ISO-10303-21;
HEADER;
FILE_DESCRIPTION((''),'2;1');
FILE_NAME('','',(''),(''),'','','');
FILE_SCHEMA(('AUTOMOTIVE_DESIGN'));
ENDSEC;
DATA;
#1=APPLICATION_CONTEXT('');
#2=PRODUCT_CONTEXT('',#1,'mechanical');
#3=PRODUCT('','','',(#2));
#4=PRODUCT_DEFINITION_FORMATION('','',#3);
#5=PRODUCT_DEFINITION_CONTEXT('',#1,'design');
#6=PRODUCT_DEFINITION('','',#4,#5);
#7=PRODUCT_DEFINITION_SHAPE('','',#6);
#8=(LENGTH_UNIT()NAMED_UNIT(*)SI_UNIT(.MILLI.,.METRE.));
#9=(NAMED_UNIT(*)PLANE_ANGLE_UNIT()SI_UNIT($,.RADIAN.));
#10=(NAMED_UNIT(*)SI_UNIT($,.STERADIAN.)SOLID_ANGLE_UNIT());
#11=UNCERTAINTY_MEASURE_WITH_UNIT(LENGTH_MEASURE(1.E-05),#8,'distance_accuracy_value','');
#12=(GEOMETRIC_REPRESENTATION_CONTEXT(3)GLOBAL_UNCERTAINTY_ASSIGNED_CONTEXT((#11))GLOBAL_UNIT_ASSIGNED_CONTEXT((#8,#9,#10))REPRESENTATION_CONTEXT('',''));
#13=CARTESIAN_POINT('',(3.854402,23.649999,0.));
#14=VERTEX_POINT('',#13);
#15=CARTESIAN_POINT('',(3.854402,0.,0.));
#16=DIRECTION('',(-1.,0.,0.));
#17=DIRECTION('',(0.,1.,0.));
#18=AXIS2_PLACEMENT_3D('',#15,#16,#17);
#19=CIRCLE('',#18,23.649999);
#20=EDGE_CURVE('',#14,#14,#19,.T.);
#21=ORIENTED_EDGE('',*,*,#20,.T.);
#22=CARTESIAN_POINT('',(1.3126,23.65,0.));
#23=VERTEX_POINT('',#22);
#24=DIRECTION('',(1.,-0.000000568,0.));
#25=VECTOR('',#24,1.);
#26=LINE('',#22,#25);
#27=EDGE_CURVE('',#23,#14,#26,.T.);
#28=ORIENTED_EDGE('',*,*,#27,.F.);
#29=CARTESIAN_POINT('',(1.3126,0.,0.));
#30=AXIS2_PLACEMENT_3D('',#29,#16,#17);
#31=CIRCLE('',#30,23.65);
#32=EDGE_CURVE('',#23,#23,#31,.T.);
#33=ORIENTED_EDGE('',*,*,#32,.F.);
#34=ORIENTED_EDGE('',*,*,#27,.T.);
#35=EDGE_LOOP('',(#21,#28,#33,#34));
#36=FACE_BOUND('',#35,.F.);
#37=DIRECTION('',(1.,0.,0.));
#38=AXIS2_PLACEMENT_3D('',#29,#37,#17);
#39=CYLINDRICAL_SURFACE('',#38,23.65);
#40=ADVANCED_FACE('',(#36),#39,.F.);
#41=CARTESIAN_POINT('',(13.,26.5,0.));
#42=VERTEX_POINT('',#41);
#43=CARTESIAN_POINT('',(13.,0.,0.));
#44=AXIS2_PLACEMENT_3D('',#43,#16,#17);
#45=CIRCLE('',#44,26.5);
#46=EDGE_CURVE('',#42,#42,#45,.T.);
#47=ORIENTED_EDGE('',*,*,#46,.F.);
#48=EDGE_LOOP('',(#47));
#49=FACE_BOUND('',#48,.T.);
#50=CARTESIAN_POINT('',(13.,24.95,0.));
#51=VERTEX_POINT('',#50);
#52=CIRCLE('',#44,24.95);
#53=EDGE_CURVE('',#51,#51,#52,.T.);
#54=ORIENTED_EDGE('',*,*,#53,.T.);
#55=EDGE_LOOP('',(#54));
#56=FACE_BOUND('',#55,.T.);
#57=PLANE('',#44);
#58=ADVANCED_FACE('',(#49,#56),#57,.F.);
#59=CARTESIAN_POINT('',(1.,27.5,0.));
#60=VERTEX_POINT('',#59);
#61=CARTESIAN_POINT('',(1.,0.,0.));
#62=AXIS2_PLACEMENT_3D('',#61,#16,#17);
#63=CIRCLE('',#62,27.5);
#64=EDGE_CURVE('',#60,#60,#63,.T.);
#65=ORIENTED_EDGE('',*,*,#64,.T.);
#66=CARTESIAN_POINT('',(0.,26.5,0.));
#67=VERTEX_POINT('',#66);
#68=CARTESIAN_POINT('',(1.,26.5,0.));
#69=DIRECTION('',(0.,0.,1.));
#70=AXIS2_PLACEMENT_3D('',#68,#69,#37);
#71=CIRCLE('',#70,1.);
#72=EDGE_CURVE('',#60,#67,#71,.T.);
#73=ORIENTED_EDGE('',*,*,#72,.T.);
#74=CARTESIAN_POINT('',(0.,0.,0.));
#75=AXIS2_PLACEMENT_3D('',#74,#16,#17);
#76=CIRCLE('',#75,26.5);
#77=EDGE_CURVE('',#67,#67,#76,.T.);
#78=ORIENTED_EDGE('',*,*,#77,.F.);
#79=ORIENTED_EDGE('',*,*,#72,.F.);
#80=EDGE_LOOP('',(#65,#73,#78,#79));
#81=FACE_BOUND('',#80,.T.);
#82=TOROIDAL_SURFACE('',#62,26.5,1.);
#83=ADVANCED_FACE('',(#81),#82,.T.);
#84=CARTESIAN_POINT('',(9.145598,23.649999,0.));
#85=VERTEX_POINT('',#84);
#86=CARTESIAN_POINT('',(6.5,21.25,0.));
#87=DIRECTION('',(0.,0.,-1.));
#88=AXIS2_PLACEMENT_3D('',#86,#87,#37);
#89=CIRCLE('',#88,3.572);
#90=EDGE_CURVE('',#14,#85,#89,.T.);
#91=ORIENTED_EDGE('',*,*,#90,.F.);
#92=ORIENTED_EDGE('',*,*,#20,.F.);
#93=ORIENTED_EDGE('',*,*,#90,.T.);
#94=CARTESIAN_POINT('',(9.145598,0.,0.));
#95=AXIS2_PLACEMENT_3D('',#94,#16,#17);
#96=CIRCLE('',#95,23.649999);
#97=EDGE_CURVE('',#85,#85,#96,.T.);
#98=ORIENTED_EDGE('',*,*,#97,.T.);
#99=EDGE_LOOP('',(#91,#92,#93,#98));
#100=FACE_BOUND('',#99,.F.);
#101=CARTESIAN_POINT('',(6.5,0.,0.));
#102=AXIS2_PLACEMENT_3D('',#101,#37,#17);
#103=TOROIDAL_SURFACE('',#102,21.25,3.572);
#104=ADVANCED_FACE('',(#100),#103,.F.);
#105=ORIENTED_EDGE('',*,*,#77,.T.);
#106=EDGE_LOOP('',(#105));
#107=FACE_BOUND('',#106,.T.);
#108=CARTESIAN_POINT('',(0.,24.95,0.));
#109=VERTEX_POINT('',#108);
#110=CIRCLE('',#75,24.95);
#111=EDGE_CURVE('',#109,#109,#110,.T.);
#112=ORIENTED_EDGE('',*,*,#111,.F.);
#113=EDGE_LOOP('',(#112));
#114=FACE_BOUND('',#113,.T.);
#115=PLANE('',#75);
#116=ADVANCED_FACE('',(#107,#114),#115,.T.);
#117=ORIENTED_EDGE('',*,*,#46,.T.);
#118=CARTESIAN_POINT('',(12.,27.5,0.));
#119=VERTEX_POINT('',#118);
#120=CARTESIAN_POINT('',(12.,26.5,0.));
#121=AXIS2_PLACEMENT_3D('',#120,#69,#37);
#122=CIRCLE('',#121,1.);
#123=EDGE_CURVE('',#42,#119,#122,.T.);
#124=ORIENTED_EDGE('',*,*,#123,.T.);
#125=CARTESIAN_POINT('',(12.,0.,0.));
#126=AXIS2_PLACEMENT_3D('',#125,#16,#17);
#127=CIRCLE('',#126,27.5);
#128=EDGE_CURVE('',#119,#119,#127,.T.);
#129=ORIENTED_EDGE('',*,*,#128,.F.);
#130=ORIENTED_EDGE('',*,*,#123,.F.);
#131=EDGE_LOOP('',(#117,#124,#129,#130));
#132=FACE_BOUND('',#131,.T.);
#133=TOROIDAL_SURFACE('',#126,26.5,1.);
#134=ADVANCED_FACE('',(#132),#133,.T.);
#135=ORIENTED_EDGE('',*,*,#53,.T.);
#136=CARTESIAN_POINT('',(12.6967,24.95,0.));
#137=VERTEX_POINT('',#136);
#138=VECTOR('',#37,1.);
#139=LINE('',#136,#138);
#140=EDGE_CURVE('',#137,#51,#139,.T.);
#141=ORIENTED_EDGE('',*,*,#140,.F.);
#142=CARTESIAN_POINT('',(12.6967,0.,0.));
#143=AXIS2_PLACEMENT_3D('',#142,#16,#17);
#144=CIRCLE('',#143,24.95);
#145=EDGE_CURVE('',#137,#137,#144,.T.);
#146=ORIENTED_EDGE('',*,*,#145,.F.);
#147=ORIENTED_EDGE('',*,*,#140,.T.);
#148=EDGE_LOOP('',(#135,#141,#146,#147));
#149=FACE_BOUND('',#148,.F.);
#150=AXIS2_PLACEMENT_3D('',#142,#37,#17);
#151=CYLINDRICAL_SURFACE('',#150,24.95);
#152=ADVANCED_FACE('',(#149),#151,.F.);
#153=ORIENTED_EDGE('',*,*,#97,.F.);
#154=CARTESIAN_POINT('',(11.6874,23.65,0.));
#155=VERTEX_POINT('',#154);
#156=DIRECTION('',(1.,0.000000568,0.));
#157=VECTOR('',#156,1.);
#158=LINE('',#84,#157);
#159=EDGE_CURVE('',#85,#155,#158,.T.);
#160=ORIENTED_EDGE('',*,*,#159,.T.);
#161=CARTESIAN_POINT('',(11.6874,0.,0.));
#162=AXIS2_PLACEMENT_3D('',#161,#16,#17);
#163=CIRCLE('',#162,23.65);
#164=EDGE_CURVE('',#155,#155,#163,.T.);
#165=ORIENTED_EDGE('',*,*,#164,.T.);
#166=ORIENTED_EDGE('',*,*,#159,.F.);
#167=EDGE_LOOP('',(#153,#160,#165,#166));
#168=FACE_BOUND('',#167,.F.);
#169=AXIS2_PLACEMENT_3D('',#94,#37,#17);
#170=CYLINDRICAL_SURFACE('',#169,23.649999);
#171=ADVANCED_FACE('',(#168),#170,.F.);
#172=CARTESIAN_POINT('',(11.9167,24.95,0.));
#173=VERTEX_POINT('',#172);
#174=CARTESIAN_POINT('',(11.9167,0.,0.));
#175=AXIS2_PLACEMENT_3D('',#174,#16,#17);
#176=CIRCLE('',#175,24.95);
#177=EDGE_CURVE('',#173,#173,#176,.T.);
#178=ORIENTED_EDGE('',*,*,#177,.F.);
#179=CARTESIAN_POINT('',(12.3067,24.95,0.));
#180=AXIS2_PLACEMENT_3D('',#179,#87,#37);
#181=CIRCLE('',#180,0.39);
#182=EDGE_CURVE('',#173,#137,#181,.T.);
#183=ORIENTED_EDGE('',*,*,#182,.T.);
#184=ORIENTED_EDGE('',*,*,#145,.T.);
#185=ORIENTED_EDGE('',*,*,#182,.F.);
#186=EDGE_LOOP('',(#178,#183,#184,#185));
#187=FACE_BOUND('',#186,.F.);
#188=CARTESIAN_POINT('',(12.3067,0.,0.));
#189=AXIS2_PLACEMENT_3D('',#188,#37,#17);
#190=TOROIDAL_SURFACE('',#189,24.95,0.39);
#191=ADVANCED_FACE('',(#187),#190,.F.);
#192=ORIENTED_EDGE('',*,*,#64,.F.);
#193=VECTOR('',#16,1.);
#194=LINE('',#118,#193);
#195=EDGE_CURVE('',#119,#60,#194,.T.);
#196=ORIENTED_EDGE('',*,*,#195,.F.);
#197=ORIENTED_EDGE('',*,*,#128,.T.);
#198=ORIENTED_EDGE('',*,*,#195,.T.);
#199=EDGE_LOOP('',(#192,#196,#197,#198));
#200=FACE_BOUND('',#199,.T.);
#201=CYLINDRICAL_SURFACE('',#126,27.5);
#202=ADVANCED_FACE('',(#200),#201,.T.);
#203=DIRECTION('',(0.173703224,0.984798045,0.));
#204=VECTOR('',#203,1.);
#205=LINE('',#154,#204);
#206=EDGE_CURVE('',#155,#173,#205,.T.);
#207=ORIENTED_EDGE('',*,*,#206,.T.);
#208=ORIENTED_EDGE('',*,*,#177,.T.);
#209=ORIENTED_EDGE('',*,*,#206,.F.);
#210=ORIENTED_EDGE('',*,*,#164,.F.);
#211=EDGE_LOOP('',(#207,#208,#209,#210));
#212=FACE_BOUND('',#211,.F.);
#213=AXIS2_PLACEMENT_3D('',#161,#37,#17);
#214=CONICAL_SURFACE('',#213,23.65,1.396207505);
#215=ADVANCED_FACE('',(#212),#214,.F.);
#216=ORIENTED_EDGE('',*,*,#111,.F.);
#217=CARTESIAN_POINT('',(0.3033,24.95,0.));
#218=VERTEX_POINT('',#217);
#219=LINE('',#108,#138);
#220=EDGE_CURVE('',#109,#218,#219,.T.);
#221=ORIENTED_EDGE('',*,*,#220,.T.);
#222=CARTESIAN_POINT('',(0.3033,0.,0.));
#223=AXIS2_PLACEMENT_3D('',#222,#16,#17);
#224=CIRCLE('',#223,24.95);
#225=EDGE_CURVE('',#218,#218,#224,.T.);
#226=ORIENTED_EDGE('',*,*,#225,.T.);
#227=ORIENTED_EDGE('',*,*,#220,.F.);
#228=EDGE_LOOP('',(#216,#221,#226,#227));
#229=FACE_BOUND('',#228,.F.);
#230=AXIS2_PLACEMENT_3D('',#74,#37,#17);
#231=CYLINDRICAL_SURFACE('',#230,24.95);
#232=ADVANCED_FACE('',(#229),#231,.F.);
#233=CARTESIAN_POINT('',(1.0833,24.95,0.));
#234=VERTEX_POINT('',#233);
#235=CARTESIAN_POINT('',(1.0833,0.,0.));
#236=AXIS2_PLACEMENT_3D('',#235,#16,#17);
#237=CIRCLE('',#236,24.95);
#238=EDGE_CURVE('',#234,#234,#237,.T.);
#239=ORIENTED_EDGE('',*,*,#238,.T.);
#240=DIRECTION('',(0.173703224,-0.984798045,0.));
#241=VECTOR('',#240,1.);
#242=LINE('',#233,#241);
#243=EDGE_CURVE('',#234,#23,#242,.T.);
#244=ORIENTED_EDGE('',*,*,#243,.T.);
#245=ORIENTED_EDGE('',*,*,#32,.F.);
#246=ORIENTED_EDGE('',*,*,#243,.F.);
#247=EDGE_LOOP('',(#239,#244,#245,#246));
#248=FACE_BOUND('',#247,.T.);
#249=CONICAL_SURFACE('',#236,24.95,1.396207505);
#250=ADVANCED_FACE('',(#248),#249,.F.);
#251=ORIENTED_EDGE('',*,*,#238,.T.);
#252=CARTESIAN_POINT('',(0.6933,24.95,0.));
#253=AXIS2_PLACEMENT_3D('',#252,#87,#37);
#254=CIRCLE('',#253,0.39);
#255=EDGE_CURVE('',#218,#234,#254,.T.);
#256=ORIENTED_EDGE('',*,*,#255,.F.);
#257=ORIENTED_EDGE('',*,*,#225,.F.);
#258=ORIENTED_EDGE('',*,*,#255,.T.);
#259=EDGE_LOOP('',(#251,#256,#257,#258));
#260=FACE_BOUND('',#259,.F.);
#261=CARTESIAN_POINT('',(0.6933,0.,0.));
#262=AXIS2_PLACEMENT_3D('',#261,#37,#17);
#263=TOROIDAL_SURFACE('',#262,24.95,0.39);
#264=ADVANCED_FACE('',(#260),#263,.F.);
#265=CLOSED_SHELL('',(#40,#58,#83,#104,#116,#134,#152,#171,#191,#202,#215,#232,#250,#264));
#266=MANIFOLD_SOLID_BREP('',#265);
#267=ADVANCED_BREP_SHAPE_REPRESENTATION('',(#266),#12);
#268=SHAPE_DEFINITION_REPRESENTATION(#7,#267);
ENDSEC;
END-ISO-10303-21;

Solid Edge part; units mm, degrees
sketch "Sketch1" plane through (0, 0, 0) normal (0, 0, 1) x (1, 0, 0)
  line L0 (0, 26.5) -> (0, 24.95)
  line L1 (0, 24.95) -> (0.3033, 24.95)
  arc A0 (0.3033, 24.95) -> (1.0833, 24.95) centre (0.6933, 24.95) cw
  line L2 (1.0833, 24.95) -> (1.3126, 23.65)
  line L3 (1.3126, 23.65) -> (3.8544, 23.65)
  arc A1 (3.8544, 23.65) -> (9.1456, 23.65) centre (6.5, 21.25) cw
  line L4 (9.1456, 23.65) -> (11.6874, 23.65)
  line L5 (11.6874, 23.65) -> (11.9167, 24.95)
  arc A2 (11.9167, 24.95) -> (12.6967, 24.95) centre (12.3067, 24.95) cw
  line L6 (12.6967, 24.95) -> (13, 24.95)
  line L7 (13, 24.95) -> (13, 26.5)
  arc A3 (13, 26.5) -> (12, 27.5) centre (12, 26.5) ccw
  line L8 (12, 27.5) -> (1, 27.5)
  arc A4 (1, 27.5) -> (0, 26.5) centre (1, 26.5) ccw
revolve "RevolvedProtrusion1" add sketch "Sketch1" angle 360 about axis through (12, 0, 0) along (-1, 0, 0)
properties material "Steel"
